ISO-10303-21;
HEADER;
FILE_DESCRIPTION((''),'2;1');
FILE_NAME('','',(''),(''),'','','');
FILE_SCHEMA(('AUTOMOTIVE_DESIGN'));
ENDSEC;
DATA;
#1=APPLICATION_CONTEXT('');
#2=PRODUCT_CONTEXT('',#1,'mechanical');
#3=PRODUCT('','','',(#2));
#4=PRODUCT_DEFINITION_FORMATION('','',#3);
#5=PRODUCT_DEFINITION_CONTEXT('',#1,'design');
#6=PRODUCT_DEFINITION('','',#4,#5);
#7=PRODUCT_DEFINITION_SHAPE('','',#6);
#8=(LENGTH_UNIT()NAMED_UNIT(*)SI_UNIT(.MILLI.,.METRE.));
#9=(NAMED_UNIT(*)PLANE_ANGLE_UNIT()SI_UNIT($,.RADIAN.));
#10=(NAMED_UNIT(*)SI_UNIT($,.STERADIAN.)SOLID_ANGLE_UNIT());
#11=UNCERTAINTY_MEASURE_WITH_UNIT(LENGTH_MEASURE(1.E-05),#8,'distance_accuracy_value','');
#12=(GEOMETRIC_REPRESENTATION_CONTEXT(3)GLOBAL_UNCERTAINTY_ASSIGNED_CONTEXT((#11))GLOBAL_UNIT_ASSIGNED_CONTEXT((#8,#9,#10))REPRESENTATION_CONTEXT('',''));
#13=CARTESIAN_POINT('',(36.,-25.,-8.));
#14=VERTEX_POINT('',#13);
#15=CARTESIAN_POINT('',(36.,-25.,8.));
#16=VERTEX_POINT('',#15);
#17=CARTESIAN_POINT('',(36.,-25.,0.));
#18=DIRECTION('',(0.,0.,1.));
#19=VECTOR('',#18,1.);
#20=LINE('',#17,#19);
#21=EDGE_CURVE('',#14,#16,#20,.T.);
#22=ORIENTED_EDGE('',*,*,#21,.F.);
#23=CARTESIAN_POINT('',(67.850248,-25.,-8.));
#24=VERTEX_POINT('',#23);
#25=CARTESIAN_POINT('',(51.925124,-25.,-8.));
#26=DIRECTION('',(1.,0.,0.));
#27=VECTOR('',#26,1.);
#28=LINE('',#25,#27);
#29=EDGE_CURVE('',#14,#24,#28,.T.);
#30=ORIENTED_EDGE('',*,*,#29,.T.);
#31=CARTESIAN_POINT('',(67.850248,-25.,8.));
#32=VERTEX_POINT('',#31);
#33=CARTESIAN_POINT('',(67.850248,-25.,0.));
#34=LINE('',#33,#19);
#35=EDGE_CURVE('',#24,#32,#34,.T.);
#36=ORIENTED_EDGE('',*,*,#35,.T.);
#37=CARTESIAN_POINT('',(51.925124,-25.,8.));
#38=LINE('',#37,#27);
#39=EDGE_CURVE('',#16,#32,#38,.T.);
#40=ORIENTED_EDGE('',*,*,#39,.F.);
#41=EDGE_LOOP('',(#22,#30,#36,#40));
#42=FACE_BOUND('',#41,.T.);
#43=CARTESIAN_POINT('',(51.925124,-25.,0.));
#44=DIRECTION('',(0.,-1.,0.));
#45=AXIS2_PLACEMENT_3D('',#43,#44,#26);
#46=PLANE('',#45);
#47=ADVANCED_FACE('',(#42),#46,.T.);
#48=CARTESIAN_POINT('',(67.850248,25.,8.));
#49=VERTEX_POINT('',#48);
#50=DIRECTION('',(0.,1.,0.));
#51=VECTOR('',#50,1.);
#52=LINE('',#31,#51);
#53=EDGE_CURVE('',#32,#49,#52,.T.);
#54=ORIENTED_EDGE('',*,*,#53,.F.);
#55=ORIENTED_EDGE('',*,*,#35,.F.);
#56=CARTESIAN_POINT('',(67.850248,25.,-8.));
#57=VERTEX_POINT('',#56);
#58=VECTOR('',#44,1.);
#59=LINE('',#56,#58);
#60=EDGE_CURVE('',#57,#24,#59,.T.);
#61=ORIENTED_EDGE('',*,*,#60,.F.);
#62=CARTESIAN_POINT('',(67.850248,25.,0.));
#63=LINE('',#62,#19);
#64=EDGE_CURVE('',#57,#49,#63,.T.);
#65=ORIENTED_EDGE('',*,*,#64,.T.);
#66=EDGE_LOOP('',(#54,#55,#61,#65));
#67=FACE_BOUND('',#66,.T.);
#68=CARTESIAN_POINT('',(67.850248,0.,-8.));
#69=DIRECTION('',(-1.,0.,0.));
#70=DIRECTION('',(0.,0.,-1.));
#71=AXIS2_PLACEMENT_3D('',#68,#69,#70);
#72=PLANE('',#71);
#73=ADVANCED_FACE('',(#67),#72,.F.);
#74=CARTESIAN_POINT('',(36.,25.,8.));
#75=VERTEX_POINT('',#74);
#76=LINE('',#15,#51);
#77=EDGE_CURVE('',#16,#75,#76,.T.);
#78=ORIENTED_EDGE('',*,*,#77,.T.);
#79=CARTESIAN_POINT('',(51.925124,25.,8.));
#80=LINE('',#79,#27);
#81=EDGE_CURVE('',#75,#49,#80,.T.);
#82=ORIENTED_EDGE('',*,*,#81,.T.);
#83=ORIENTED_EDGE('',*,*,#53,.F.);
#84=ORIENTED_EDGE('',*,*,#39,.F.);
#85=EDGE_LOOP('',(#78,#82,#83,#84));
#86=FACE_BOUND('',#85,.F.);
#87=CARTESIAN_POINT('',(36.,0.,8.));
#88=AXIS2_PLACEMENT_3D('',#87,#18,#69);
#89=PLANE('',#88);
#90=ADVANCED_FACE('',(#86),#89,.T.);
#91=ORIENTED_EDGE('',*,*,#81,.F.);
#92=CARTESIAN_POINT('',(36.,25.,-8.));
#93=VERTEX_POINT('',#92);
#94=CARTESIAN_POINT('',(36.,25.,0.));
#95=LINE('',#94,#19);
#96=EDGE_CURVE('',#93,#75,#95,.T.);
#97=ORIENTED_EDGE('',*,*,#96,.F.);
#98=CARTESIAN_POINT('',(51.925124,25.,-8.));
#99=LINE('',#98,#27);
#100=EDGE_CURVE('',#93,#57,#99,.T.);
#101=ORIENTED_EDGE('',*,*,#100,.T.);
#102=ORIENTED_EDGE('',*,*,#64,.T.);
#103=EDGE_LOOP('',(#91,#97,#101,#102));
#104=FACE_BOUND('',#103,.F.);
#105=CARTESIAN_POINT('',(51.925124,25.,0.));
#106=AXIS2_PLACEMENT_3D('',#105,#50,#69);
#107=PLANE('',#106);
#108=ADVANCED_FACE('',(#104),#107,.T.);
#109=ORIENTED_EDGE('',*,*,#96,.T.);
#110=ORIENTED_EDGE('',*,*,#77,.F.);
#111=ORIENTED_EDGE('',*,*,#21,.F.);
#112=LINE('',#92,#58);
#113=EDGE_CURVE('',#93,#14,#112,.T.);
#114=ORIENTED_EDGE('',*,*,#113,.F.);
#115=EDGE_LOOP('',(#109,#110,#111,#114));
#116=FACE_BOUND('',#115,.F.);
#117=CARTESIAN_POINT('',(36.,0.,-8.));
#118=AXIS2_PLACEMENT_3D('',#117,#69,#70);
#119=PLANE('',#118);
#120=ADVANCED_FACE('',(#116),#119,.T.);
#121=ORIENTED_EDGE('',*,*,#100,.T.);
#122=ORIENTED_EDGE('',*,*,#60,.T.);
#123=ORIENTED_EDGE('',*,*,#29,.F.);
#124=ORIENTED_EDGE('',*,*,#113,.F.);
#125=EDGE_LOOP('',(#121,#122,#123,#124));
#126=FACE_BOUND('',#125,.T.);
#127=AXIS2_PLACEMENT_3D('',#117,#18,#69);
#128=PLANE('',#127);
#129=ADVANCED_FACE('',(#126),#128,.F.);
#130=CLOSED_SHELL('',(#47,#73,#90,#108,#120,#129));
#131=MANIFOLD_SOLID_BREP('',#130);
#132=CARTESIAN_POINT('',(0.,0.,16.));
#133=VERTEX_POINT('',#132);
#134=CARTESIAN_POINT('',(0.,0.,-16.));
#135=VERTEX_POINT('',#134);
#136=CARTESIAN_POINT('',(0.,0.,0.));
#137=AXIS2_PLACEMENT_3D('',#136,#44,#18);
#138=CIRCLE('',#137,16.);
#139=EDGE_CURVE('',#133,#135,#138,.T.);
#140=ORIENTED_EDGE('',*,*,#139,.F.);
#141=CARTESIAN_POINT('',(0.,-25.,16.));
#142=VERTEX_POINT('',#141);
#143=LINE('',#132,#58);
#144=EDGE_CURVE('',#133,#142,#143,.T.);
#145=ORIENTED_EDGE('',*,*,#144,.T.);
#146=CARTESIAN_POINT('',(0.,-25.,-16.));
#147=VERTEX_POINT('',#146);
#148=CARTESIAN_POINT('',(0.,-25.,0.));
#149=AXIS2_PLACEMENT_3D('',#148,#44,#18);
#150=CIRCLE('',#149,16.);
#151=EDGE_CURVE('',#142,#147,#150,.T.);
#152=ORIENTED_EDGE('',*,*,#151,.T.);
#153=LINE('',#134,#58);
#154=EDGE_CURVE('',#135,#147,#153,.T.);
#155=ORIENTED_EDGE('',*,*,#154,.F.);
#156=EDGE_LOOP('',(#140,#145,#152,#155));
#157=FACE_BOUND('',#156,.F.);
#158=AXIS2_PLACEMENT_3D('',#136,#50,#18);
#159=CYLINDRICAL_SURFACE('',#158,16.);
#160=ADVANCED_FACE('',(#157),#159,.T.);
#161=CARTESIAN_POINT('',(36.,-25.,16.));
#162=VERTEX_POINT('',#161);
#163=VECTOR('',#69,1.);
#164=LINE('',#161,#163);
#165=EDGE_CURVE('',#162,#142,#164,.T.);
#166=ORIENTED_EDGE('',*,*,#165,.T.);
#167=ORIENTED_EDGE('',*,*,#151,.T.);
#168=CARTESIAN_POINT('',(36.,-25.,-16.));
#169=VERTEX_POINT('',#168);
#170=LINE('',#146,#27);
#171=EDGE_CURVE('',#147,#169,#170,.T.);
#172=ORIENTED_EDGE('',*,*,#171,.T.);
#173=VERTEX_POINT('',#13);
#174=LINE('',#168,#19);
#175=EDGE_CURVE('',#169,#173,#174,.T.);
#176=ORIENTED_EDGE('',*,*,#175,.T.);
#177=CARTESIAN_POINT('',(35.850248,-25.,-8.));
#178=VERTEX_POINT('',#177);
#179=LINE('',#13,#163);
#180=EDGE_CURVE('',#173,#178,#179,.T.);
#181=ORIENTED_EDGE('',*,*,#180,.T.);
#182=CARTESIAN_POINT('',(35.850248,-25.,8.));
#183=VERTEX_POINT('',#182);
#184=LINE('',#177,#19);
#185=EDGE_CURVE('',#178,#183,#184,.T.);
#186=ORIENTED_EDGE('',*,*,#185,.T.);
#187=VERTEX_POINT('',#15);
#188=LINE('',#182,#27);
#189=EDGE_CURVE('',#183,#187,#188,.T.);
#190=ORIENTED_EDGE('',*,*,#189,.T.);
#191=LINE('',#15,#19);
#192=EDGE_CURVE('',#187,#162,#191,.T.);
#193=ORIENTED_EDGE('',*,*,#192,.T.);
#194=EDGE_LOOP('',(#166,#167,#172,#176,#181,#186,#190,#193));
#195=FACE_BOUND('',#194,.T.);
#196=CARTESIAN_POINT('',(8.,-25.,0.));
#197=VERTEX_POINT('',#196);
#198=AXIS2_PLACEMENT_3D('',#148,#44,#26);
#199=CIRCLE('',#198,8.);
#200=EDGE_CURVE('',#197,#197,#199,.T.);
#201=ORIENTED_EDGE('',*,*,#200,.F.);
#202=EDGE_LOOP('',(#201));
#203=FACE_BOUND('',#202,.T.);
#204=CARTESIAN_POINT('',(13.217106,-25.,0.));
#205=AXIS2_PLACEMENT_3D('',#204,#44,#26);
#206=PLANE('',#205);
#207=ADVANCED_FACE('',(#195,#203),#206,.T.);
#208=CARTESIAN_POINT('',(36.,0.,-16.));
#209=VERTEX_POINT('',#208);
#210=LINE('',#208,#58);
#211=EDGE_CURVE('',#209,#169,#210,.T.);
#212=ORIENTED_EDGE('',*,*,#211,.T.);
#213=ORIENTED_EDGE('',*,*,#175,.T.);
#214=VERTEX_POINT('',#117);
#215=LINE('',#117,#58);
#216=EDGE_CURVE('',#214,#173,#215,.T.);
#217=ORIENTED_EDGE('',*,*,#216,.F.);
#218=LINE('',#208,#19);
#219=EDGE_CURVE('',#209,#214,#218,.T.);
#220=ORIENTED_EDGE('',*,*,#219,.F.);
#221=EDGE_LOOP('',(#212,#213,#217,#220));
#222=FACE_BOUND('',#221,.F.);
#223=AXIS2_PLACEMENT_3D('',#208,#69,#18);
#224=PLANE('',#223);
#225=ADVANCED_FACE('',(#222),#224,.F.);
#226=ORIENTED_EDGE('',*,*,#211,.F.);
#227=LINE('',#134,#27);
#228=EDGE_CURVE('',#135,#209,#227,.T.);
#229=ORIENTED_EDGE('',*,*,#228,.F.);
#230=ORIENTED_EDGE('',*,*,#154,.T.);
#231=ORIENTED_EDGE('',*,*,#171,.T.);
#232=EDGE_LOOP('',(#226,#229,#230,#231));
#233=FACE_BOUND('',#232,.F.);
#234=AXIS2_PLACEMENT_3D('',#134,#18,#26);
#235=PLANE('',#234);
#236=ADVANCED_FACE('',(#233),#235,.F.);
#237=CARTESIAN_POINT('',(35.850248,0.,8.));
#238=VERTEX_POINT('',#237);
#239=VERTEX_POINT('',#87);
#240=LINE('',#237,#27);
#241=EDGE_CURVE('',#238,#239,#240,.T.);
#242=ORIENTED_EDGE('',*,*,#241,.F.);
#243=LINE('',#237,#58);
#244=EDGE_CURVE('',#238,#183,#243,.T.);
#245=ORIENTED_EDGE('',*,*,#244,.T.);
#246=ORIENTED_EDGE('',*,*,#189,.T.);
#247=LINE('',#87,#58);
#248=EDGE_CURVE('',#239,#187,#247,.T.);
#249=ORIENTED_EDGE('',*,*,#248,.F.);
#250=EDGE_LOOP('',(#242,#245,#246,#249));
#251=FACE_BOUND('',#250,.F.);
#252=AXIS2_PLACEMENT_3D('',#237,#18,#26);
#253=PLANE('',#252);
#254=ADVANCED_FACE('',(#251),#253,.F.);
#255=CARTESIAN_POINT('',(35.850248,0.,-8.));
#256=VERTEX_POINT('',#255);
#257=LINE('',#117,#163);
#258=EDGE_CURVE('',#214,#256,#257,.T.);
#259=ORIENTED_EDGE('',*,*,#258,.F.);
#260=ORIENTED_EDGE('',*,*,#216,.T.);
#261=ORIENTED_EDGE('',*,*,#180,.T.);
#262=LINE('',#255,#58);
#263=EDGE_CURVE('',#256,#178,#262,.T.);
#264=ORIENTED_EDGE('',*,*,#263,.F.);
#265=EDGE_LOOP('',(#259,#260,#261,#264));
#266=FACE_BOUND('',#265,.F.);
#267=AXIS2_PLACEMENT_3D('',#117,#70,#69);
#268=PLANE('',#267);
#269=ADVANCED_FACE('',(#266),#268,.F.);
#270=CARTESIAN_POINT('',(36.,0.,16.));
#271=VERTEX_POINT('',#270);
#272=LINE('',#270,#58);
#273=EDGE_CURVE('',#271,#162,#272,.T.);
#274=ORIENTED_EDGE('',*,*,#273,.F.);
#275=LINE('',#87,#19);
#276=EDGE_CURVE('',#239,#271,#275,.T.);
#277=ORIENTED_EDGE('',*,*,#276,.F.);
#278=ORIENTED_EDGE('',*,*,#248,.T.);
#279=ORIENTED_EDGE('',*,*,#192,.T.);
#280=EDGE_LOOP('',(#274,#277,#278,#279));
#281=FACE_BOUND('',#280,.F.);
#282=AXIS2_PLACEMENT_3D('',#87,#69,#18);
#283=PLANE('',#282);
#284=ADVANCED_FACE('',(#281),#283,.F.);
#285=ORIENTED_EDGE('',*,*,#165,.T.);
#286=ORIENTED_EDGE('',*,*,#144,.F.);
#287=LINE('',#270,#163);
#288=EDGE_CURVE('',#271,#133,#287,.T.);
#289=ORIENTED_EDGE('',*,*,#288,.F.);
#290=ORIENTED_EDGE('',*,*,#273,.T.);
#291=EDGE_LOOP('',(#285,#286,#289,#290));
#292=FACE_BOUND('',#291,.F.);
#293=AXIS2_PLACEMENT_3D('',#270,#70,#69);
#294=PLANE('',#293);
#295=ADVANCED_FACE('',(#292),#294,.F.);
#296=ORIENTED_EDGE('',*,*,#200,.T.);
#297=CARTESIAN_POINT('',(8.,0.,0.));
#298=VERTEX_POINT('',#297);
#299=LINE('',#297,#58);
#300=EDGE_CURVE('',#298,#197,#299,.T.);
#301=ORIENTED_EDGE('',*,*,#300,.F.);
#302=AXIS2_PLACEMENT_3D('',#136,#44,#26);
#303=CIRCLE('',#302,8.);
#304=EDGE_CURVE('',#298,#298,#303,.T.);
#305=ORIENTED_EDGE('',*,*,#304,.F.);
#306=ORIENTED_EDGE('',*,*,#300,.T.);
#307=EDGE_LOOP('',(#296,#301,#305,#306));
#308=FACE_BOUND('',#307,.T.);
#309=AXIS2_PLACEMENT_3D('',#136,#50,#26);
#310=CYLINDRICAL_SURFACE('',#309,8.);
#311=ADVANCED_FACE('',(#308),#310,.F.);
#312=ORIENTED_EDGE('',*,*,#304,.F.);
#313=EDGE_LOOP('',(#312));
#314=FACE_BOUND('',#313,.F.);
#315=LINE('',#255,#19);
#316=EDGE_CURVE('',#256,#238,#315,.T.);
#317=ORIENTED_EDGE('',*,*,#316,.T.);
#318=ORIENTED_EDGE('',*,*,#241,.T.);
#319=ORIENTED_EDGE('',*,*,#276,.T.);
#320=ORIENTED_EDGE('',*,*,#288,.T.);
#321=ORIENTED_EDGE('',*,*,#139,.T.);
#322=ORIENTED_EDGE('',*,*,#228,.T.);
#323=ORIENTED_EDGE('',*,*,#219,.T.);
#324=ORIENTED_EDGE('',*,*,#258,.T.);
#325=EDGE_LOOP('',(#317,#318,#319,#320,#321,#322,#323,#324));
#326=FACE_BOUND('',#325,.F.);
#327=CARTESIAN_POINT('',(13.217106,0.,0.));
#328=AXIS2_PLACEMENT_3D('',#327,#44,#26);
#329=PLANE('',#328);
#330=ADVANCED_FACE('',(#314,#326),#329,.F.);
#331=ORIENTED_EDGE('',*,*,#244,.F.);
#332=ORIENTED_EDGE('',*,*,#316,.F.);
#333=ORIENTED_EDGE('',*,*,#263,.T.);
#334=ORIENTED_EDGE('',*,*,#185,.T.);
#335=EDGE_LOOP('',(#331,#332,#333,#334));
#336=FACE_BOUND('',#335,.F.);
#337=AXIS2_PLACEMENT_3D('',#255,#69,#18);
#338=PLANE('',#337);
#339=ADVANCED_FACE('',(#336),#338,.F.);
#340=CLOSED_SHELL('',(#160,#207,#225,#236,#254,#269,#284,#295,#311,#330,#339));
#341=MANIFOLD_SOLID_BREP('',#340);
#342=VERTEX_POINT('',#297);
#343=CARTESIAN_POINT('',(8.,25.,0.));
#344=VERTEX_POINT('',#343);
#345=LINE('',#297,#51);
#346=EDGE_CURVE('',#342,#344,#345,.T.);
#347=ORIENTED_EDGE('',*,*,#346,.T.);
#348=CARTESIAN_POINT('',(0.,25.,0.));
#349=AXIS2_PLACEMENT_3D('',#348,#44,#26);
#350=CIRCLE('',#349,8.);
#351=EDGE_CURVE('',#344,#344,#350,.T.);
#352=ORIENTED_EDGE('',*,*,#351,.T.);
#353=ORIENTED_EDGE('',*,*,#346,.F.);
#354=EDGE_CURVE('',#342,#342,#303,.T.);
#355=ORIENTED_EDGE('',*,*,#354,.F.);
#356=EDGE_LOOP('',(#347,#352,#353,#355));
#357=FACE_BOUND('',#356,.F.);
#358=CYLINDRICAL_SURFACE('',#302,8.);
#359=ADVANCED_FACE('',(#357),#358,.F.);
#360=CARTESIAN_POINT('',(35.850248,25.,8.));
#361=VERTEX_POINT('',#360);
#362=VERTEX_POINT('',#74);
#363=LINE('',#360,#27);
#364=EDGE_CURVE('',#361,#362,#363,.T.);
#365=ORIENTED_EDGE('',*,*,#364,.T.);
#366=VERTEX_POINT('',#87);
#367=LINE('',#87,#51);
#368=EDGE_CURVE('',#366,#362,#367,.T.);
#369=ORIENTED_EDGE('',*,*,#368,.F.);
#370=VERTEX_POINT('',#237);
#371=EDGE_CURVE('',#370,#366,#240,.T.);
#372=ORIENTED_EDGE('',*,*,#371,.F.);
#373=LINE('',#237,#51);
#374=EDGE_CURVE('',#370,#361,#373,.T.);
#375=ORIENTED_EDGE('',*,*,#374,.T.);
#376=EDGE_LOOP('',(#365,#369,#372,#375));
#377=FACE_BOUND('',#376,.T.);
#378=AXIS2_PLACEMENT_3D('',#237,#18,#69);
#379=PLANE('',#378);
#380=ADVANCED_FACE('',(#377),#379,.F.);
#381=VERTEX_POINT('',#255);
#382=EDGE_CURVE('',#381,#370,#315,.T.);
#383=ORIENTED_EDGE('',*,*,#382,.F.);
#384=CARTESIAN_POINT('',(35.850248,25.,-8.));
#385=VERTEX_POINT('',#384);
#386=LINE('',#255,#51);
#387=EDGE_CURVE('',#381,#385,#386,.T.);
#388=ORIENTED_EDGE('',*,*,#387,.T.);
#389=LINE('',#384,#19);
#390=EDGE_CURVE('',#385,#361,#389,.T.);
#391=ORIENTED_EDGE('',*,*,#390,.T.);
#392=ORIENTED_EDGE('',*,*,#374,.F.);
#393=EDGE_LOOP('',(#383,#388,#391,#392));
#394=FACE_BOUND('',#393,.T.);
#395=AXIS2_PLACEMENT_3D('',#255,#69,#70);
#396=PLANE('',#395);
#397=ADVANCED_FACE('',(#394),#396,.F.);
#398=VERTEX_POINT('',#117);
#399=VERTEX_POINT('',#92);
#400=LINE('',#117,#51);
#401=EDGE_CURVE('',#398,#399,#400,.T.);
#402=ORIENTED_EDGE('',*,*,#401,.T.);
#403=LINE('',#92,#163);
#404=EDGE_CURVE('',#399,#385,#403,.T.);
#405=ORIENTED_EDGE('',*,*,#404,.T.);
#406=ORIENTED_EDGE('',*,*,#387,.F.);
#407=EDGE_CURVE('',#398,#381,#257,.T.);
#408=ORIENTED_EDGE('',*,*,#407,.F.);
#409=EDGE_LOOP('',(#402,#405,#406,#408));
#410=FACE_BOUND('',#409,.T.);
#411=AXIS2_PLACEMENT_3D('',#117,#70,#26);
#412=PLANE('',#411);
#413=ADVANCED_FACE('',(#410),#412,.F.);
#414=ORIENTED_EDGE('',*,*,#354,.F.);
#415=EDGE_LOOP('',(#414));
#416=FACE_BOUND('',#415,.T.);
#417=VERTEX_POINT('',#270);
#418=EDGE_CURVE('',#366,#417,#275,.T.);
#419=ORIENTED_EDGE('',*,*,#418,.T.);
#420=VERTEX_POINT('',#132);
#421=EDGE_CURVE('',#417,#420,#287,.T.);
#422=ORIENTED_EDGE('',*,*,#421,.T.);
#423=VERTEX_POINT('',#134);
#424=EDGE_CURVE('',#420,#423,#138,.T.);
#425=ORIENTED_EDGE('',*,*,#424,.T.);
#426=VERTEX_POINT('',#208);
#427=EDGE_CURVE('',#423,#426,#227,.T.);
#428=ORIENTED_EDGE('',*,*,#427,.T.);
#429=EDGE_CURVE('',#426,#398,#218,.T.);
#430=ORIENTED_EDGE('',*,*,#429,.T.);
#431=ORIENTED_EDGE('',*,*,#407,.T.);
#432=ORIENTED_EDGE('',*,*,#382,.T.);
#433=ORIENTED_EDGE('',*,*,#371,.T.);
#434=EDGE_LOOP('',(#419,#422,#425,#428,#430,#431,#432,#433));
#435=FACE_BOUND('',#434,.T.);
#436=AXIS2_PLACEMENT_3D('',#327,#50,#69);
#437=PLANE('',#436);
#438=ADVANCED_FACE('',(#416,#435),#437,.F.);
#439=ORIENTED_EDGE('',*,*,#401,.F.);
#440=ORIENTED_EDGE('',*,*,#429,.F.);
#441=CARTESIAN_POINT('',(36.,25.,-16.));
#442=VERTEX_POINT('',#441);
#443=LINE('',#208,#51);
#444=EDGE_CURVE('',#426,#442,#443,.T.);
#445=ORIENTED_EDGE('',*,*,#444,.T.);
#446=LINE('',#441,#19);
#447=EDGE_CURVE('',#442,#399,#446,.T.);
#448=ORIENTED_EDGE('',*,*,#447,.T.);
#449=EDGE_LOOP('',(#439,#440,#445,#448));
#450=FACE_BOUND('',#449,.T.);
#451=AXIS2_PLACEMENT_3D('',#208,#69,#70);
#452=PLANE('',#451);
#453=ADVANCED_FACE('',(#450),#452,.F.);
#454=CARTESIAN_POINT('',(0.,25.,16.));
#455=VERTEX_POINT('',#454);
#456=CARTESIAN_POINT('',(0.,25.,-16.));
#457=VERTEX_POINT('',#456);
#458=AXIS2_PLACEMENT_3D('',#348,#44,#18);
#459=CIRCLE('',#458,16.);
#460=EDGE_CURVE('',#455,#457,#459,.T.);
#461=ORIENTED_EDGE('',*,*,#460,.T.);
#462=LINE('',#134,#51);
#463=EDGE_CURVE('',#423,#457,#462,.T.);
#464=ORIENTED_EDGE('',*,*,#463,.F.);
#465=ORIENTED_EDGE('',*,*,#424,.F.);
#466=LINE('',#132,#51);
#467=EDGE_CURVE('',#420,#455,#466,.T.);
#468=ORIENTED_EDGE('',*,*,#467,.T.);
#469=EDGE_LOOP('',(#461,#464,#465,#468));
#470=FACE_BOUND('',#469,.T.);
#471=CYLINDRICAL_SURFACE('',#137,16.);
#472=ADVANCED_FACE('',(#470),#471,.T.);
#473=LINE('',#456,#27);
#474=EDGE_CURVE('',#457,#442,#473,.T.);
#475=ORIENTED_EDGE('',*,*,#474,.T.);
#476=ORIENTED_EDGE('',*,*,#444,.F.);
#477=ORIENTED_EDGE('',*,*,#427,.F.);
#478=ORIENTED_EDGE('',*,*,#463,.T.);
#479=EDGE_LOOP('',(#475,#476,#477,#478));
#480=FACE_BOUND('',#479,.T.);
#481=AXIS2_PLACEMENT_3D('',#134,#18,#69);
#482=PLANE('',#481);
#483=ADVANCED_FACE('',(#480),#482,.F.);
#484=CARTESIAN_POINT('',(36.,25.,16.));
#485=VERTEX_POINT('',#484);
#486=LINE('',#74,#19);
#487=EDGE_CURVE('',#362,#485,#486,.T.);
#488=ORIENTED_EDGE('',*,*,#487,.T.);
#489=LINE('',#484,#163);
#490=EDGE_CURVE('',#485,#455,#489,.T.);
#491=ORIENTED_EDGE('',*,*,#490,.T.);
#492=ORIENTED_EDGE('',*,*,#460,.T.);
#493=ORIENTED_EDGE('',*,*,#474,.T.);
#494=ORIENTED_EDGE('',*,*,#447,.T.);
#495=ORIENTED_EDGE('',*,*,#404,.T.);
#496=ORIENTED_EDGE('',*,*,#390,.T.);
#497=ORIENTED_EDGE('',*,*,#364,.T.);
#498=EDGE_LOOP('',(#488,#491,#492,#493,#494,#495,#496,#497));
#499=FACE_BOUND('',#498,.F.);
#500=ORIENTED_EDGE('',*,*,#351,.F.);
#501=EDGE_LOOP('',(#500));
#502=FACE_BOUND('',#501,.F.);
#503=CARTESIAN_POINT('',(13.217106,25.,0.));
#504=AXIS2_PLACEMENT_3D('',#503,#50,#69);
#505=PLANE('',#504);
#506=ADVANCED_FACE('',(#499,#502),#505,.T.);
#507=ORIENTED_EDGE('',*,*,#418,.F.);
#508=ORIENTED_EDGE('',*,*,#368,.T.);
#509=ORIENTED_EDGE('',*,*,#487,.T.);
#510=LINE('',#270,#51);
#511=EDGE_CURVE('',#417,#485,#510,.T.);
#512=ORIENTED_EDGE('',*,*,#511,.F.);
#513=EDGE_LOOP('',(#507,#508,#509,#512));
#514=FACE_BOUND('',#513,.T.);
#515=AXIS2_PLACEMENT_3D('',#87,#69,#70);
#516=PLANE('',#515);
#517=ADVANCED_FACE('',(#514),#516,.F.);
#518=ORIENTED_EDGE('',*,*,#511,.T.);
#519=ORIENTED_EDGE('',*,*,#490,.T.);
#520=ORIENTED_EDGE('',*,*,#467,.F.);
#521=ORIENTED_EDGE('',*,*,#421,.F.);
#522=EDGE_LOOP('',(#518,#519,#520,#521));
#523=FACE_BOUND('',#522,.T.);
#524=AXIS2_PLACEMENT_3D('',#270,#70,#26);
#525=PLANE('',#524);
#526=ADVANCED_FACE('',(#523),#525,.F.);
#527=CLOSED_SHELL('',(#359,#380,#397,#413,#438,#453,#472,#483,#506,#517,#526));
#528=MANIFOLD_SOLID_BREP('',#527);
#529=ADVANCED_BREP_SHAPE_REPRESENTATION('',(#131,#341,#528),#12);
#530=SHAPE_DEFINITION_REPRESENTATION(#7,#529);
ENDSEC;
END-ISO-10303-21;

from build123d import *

# Parameters (mm, degrees)
F0_W     = 31.8502481282
F0_H     = 16
F1_DEPTH = 25
F0_R     = 8


with BuildPart() as f1:
    # F0 (on Front) → F1 (new body)
    with BuildSketch(Plane.XZ):
        with Locations((51.9251240641, 0)):
            Rectangle(F0_W, F0_H)
    extrude(amount=F1_DEPTH)

    # F3: F1 across plane


with BuildPart() as f1b:
    # F0 (on Front) → F1, piece 2 (new body)
    with BuildSketch(Plane.XZ):
        with BuildLine():
            Line((36, 16), (0, 16))
            ThreePointArc((0, 16), (-16, 0), (0, -16))
            Line((0, -16), (36, -16))
            Line((36, -16), (36, -8))
            Line((36, -8), (35.8502481282, -8))
            Line((35.8502481282, -8), (35.8502481282, 8))
            Line((35.8502481282, 8), (36, 8))
            Line((36, 8), (36, 16))
        make_face()
        Circle(F0_R, mode=Mode.SUBTRACT)
    extrude(amount=F1_DEPTH)


with BuildPart() as f2_1:
    # F2: instance of F1b
    add(f1b.part.mirror(Plane.XZ))


with BuildPart() as f1_1:
    add(f1.part)
    add(f1.part.mirror(Plane.XZ))


solid = Compound([f1b.part, f2_1.part, f1_1.part])
